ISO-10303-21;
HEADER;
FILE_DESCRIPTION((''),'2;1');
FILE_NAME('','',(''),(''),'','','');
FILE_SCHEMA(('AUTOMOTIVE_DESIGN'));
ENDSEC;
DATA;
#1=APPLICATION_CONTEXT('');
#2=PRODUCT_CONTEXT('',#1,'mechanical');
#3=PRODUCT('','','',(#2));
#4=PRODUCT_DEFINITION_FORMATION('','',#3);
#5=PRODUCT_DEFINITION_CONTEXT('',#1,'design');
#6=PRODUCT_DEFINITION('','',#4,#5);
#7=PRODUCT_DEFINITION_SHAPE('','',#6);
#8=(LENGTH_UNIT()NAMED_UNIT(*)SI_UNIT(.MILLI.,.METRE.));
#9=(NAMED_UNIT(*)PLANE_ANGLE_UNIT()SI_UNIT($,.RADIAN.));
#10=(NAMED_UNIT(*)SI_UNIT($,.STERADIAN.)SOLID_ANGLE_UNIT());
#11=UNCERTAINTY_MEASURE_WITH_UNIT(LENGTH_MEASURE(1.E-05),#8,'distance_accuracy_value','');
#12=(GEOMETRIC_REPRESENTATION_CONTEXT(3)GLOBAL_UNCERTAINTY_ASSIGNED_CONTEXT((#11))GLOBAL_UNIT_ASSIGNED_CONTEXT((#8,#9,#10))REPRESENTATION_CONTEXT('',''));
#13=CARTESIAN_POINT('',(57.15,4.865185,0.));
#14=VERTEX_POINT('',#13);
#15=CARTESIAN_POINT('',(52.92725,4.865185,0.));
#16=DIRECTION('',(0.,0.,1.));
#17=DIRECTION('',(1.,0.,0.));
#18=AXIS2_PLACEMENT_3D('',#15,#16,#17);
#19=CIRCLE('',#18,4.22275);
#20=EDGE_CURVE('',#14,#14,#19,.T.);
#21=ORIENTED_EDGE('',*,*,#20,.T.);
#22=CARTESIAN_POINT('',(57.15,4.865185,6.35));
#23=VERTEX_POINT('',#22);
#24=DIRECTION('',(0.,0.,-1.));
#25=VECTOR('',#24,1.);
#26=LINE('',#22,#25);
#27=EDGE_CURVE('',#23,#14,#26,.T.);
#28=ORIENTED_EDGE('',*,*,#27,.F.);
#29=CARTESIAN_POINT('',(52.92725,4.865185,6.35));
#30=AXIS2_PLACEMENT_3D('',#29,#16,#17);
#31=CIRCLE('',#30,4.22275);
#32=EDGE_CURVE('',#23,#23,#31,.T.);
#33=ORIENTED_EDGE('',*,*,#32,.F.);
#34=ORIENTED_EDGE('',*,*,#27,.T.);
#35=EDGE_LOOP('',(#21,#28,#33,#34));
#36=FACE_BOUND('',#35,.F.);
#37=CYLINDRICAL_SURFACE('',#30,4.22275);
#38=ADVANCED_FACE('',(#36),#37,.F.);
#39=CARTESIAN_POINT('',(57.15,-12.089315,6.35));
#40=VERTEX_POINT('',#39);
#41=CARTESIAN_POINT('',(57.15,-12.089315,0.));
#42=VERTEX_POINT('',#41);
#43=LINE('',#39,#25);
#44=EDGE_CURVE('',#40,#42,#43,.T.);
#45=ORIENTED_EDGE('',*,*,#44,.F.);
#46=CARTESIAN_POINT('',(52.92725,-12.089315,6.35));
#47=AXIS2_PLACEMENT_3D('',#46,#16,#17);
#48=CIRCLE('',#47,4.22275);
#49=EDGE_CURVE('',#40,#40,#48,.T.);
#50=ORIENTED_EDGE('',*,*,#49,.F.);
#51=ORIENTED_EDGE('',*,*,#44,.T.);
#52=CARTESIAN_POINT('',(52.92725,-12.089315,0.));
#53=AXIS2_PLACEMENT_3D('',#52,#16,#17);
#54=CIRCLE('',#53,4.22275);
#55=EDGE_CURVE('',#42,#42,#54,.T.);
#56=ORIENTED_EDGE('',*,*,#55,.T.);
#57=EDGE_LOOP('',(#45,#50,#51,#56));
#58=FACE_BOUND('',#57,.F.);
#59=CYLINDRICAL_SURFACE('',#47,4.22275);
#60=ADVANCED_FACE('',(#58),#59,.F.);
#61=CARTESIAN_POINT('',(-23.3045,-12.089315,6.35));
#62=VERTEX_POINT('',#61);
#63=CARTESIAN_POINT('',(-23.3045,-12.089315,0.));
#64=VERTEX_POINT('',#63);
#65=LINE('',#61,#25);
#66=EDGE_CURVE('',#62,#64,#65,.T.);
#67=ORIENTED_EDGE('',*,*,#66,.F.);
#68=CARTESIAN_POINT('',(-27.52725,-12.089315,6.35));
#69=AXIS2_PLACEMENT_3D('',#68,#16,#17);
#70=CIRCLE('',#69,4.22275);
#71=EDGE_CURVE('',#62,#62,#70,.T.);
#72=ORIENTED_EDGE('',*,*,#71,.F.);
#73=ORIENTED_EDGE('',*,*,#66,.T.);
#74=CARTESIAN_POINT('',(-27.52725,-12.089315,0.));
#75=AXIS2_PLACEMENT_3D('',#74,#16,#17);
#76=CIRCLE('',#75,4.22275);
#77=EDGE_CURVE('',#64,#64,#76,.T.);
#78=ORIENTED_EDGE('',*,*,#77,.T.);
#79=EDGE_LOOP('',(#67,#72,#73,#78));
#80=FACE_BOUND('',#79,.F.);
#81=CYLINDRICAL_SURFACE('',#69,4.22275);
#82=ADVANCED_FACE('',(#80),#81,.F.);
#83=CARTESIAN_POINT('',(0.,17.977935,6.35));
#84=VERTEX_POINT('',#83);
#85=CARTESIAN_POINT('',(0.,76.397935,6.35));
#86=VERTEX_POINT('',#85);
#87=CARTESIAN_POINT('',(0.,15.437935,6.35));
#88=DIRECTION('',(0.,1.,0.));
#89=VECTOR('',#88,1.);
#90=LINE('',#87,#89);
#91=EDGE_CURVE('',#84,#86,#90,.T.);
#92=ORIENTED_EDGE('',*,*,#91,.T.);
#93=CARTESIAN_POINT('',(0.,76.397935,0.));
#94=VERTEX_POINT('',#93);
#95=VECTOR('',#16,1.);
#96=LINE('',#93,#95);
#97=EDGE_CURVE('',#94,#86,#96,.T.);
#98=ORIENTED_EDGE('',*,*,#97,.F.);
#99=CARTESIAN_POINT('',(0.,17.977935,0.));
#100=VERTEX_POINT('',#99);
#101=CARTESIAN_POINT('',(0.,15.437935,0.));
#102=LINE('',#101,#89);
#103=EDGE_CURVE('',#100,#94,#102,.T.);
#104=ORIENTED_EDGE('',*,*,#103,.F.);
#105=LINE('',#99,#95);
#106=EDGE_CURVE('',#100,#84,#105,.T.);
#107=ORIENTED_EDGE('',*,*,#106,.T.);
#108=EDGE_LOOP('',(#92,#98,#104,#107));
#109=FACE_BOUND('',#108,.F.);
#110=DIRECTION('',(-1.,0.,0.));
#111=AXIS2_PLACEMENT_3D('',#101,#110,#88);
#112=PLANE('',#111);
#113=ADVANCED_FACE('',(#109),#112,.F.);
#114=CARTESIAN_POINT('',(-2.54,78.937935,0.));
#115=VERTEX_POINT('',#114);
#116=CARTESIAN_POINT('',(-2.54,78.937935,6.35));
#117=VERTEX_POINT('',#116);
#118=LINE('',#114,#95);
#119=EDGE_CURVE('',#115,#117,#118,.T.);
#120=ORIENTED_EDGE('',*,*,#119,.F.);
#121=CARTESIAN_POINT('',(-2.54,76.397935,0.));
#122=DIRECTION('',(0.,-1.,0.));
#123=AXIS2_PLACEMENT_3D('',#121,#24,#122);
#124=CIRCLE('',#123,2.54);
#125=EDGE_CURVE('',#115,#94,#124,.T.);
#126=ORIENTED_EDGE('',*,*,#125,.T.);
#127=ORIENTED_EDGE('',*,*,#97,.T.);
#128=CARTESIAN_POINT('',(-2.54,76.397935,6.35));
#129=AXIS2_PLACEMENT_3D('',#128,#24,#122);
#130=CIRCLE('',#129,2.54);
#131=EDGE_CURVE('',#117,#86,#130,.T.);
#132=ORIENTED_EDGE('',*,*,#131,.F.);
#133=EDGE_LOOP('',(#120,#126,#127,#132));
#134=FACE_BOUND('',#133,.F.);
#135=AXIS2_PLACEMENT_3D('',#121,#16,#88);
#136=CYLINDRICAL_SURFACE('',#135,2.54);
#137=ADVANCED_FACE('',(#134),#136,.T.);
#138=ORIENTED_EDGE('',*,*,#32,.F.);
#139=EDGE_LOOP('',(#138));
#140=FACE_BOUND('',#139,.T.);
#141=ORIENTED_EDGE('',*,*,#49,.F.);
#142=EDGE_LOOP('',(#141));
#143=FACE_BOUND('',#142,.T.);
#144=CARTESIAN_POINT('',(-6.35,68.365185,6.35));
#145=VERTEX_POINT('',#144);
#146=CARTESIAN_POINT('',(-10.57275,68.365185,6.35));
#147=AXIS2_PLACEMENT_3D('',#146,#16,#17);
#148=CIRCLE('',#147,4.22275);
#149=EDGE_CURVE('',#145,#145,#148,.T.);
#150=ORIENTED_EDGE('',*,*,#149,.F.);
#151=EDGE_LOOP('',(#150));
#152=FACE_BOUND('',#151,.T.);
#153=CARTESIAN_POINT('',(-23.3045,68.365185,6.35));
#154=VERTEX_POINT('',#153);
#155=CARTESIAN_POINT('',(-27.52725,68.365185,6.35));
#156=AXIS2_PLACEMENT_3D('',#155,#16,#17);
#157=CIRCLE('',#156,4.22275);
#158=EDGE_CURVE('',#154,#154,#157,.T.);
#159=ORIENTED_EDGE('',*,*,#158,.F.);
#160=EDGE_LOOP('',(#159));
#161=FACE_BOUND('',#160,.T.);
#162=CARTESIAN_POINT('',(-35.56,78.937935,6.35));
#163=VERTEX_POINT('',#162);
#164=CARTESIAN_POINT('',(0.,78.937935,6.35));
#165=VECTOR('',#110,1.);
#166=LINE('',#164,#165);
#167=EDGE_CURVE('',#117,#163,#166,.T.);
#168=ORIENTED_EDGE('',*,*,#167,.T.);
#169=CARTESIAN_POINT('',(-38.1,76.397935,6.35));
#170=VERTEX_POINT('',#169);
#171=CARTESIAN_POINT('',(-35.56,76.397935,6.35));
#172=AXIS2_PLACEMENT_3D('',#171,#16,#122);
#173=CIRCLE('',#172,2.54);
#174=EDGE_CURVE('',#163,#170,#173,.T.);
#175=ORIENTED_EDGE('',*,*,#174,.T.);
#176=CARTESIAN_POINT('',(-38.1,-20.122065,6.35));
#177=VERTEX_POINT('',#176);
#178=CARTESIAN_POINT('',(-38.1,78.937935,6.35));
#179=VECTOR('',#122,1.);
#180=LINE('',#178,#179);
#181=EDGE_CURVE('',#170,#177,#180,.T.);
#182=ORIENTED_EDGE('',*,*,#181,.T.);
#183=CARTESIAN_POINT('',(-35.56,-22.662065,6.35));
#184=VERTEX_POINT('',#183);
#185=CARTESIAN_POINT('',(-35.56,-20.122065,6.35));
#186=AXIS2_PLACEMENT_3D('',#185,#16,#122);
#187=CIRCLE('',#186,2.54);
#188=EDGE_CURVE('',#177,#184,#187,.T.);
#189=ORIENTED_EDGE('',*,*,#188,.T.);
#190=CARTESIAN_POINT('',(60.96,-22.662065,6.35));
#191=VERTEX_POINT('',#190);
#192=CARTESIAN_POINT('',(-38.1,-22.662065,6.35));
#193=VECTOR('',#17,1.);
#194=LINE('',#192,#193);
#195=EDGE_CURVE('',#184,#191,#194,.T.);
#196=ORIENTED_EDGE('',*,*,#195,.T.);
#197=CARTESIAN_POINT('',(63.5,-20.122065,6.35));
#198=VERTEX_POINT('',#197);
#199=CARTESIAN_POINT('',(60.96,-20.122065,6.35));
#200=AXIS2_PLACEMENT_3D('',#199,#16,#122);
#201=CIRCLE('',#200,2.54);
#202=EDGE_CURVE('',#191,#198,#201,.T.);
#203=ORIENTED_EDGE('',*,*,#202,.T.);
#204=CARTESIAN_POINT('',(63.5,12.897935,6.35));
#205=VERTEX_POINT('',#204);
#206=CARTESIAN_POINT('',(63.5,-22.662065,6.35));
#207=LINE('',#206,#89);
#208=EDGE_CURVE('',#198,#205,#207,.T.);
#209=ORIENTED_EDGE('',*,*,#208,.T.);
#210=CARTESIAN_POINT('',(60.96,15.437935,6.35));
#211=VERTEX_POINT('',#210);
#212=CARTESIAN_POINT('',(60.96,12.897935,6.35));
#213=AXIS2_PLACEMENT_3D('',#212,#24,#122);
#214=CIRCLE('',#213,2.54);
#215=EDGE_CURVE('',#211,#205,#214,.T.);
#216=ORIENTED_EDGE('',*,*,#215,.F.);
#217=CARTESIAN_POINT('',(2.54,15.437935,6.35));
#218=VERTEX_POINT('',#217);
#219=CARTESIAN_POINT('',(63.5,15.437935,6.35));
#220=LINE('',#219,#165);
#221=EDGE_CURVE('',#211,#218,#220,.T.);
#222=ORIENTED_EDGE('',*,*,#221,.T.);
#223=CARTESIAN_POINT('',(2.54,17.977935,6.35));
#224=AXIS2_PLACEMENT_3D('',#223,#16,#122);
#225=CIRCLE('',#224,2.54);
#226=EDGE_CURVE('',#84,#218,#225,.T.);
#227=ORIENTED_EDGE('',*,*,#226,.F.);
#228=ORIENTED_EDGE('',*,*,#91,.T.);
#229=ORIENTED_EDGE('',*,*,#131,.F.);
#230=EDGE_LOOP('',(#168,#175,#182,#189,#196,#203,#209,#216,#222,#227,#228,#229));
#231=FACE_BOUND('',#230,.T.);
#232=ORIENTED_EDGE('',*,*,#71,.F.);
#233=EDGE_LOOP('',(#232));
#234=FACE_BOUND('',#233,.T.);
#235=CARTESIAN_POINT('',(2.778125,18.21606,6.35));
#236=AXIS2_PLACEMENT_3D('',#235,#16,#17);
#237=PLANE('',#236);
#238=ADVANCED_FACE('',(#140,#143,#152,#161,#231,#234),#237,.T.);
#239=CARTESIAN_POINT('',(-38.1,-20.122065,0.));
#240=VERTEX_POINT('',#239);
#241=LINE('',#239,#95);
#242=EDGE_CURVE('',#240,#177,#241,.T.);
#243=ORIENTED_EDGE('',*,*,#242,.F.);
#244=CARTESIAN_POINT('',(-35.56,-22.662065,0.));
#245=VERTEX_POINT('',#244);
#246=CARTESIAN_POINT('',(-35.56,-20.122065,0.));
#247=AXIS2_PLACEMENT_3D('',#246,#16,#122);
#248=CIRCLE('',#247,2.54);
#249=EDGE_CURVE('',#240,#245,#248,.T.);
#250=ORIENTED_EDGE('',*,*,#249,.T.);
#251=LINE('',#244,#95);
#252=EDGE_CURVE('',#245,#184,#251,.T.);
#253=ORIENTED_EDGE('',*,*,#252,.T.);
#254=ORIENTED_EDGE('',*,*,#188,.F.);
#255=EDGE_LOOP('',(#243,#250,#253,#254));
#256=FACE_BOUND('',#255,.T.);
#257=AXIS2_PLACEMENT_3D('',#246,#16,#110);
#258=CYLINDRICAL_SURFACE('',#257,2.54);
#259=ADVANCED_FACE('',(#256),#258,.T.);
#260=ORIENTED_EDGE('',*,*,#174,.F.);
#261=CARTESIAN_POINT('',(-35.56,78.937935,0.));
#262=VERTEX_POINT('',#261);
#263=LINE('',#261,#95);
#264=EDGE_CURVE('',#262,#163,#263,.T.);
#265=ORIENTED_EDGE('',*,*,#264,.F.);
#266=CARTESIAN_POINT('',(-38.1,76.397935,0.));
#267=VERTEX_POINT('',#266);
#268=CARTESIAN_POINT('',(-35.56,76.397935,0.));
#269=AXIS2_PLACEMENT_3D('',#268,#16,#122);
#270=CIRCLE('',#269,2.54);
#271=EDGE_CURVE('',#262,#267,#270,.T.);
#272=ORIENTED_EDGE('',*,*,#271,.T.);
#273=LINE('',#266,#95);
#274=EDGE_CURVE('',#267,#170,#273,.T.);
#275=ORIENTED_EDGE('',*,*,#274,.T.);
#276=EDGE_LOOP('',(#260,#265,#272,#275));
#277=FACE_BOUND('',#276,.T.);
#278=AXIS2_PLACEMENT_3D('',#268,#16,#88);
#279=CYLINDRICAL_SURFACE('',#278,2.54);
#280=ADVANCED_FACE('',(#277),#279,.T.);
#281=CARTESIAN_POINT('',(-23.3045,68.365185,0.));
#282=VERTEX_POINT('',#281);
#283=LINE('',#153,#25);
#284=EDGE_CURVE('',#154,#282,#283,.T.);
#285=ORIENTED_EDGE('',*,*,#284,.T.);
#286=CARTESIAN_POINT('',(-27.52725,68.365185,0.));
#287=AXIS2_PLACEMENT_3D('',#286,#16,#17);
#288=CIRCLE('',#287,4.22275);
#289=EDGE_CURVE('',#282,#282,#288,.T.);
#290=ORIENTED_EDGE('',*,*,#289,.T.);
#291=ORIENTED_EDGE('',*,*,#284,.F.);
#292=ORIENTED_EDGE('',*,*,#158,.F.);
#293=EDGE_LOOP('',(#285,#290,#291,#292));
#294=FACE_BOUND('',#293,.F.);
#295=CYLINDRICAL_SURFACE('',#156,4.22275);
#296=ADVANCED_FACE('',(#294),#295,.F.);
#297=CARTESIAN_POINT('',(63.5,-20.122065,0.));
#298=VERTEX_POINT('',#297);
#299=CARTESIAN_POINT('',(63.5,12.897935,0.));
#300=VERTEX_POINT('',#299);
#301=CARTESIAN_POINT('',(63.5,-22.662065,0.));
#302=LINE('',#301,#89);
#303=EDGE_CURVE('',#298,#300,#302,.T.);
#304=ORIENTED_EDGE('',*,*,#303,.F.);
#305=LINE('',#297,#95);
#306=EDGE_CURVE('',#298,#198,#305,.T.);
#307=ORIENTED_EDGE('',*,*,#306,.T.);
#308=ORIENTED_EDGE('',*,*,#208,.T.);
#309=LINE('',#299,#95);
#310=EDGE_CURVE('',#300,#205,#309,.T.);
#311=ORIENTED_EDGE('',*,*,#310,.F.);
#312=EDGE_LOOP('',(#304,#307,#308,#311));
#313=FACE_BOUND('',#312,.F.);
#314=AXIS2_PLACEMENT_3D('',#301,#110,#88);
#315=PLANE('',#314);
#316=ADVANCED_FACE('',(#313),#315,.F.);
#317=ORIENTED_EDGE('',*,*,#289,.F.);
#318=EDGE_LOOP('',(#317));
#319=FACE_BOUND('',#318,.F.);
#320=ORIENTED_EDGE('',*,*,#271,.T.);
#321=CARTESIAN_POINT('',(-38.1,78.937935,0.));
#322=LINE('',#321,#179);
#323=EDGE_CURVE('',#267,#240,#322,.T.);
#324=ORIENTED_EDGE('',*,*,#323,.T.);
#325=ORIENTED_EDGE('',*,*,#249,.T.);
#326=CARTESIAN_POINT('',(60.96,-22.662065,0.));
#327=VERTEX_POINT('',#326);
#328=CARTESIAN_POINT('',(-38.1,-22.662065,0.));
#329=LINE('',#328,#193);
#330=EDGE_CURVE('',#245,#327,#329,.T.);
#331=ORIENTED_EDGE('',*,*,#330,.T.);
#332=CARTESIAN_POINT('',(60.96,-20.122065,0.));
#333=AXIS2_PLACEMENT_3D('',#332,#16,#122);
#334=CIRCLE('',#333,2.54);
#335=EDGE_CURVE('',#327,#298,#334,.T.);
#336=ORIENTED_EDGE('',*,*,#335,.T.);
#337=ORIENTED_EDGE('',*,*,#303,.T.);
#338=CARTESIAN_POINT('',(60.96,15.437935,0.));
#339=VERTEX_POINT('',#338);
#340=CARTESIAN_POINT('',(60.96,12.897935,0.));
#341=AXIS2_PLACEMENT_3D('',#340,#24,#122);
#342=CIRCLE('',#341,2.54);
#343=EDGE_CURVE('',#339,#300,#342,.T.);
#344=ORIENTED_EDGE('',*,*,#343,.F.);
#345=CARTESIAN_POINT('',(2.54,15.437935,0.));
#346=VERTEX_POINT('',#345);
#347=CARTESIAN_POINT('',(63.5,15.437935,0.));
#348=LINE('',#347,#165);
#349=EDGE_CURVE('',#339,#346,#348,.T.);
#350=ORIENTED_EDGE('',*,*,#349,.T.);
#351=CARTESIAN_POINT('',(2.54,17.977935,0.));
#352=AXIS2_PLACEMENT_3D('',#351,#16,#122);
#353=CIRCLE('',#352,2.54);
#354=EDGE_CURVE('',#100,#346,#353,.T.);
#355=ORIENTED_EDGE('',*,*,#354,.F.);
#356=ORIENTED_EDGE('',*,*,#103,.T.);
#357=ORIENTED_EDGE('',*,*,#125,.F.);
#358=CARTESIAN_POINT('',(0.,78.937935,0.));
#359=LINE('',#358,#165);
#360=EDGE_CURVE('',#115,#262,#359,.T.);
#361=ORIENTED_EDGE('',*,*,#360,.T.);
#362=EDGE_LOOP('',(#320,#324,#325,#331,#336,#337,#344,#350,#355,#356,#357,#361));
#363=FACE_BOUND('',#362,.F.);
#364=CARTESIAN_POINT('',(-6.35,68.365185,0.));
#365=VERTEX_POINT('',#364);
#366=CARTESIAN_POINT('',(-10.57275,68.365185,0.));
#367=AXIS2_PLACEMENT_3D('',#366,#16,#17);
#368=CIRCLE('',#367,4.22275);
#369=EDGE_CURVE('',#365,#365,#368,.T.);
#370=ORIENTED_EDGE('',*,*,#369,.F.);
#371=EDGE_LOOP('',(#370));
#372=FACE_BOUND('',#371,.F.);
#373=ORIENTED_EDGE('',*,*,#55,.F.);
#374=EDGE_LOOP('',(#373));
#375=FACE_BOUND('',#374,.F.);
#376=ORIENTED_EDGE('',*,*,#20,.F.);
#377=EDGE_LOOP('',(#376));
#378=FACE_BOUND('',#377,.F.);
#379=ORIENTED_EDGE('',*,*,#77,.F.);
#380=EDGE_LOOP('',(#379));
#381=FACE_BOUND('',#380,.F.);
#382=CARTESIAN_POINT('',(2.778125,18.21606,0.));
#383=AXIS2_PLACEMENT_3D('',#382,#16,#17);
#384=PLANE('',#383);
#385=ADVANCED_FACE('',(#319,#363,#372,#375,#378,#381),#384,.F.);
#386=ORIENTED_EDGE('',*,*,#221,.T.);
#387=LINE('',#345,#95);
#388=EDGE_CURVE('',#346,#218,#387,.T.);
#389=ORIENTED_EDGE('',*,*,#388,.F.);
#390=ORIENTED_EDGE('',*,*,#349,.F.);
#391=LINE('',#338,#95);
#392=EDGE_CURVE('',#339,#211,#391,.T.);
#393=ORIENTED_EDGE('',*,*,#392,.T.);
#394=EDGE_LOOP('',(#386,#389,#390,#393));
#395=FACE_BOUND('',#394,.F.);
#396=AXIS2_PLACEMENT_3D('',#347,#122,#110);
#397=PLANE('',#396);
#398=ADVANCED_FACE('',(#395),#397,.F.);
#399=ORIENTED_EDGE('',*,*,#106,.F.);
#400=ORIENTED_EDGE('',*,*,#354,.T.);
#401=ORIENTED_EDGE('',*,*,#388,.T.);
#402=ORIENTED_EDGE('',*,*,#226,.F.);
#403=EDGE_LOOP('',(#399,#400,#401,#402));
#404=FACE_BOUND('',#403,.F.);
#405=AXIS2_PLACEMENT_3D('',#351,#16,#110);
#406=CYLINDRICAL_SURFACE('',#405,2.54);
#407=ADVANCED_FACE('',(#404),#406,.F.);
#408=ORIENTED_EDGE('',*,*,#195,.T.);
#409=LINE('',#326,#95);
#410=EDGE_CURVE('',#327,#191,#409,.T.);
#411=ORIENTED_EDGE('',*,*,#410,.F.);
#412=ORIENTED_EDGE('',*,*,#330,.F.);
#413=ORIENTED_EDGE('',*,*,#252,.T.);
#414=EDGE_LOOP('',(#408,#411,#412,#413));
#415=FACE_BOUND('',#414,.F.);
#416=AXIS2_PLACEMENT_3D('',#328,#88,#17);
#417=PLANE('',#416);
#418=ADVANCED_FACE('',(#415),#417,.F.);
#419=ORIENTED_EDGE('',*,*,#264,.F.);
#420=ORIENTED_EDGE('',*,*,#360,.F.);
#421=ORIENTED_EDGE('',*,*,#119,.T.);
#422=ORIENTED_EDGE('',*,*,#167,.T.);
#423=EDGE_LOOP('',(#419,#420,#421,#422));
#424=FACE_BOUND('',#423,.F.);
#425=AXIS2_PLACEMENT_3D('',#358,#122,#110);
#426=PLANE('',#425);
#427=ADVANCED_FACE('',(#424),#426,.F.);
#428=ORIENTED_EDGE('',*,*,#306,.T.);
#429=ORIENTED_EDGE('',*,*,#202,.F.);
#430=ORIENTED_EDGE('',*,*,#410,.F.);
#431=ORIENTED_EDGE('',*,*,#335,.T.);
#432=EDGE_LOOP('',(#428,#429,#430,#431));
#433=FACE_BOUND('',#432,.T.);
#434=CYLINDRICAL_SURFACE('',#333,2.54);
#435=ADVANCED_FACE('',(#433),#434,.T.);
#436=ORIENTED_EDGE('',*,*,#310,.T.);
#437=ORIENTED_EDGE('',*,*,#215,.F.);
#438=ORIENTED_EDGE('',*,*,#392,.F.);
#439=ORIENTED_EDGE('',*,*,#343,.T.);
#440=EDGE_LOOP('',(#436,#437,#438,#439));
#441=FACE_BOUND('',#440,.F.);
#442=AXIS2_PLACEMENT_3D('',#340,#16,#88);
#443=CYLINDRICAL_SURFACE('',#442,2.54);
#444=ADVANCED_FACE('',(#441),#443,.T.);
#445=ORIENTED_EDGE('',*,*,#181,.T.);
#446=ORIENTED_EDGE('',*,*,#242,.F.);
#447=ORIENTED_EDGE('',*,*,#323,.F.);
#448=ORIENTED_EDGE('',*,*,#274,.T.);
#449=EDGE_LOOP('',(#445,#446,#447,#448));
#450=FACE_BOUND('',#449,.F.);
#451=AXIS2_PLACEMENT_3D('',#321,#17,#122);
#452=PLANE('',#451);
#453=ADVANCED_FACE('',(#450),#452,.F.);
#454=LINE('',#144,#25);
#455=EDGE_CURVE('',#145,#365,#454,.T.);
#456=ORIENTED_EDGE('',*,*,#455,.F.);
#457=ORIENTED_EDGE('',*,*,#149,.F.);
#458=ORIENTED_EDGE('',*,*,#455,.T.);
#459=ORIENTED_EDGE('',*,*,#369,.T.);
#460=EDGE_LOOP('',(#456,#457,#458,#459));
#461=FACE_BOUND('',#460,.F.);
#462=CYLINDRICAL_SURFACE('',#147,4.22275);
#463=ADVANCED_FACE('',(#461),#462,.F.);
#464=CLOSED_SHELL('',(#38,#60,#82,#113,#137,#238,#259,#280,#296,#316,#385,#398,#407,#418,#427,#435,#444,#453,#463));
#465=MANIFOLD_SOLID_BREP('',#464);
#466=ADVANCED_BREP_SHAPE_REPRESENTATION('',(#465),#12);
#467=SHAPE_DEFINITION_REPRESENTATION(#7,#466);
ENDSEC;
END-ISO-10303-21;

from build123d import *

# Parameters (mm, degrees)
F1_DEPTH = 6.35
F2_R     = 4.22275
F3_DEPTH = 6.351
F4_R     = 2.54


# Not quite as in the source:
# - a length typed as a fraction of an inch, garbled in the dataset ("3 / 203.2 mm" for 3/8 in), is restored


with BuildPart() as f1:
    # F0 (on Top) → F1 (new body)
    with BuildSketch(Plane.XY):
        Polygon((0, 78.937935479), (-38.1, 78.937935479), (-38.1, -22.662064521), (63.5, -22.662064521), (63.5, 15.437935479), (0, 15.437935479), align=None)
    extrude(amount=F1_DEPTH)

    # F2 (on face) → F3 (cut, through all)
    with BuildSketch(Plane.XY.offset(6.35)):
        with Locations((-27.52725, 68.365185479)):
            Circle(F2_R)
        with Locations((-10.57275, 68.365185479)):
            Circle(F2_R)
        with Locations((52.92725, 4.865185479)):
            Circle(F2_R)
        with Locations((52.92725, -12.089314521)):
            Circle(F2_R)
        with Locations((-27.52725, -12.089314521)):
            Circle(F2_R)
    extrude(amount=-F3_DEPTH, mode=Mode.SUBTRACT)

    # F4
    f4_edges = [f1.edges().sort_by_distance(p)[0] for p in [
        (-38.1, -22.662065, 3.175),
        (63.5, -22.662065, 3.175),
        (63.5, 15.437935, 3.175),
        (0, 15.437935, 3.175),
        (0, 78.937935, 3.175),
        (-38.1, 78.937935, 3.175),
    ]]
    fillet(f4_edges, radius=F4_R)


solid = f1.part
